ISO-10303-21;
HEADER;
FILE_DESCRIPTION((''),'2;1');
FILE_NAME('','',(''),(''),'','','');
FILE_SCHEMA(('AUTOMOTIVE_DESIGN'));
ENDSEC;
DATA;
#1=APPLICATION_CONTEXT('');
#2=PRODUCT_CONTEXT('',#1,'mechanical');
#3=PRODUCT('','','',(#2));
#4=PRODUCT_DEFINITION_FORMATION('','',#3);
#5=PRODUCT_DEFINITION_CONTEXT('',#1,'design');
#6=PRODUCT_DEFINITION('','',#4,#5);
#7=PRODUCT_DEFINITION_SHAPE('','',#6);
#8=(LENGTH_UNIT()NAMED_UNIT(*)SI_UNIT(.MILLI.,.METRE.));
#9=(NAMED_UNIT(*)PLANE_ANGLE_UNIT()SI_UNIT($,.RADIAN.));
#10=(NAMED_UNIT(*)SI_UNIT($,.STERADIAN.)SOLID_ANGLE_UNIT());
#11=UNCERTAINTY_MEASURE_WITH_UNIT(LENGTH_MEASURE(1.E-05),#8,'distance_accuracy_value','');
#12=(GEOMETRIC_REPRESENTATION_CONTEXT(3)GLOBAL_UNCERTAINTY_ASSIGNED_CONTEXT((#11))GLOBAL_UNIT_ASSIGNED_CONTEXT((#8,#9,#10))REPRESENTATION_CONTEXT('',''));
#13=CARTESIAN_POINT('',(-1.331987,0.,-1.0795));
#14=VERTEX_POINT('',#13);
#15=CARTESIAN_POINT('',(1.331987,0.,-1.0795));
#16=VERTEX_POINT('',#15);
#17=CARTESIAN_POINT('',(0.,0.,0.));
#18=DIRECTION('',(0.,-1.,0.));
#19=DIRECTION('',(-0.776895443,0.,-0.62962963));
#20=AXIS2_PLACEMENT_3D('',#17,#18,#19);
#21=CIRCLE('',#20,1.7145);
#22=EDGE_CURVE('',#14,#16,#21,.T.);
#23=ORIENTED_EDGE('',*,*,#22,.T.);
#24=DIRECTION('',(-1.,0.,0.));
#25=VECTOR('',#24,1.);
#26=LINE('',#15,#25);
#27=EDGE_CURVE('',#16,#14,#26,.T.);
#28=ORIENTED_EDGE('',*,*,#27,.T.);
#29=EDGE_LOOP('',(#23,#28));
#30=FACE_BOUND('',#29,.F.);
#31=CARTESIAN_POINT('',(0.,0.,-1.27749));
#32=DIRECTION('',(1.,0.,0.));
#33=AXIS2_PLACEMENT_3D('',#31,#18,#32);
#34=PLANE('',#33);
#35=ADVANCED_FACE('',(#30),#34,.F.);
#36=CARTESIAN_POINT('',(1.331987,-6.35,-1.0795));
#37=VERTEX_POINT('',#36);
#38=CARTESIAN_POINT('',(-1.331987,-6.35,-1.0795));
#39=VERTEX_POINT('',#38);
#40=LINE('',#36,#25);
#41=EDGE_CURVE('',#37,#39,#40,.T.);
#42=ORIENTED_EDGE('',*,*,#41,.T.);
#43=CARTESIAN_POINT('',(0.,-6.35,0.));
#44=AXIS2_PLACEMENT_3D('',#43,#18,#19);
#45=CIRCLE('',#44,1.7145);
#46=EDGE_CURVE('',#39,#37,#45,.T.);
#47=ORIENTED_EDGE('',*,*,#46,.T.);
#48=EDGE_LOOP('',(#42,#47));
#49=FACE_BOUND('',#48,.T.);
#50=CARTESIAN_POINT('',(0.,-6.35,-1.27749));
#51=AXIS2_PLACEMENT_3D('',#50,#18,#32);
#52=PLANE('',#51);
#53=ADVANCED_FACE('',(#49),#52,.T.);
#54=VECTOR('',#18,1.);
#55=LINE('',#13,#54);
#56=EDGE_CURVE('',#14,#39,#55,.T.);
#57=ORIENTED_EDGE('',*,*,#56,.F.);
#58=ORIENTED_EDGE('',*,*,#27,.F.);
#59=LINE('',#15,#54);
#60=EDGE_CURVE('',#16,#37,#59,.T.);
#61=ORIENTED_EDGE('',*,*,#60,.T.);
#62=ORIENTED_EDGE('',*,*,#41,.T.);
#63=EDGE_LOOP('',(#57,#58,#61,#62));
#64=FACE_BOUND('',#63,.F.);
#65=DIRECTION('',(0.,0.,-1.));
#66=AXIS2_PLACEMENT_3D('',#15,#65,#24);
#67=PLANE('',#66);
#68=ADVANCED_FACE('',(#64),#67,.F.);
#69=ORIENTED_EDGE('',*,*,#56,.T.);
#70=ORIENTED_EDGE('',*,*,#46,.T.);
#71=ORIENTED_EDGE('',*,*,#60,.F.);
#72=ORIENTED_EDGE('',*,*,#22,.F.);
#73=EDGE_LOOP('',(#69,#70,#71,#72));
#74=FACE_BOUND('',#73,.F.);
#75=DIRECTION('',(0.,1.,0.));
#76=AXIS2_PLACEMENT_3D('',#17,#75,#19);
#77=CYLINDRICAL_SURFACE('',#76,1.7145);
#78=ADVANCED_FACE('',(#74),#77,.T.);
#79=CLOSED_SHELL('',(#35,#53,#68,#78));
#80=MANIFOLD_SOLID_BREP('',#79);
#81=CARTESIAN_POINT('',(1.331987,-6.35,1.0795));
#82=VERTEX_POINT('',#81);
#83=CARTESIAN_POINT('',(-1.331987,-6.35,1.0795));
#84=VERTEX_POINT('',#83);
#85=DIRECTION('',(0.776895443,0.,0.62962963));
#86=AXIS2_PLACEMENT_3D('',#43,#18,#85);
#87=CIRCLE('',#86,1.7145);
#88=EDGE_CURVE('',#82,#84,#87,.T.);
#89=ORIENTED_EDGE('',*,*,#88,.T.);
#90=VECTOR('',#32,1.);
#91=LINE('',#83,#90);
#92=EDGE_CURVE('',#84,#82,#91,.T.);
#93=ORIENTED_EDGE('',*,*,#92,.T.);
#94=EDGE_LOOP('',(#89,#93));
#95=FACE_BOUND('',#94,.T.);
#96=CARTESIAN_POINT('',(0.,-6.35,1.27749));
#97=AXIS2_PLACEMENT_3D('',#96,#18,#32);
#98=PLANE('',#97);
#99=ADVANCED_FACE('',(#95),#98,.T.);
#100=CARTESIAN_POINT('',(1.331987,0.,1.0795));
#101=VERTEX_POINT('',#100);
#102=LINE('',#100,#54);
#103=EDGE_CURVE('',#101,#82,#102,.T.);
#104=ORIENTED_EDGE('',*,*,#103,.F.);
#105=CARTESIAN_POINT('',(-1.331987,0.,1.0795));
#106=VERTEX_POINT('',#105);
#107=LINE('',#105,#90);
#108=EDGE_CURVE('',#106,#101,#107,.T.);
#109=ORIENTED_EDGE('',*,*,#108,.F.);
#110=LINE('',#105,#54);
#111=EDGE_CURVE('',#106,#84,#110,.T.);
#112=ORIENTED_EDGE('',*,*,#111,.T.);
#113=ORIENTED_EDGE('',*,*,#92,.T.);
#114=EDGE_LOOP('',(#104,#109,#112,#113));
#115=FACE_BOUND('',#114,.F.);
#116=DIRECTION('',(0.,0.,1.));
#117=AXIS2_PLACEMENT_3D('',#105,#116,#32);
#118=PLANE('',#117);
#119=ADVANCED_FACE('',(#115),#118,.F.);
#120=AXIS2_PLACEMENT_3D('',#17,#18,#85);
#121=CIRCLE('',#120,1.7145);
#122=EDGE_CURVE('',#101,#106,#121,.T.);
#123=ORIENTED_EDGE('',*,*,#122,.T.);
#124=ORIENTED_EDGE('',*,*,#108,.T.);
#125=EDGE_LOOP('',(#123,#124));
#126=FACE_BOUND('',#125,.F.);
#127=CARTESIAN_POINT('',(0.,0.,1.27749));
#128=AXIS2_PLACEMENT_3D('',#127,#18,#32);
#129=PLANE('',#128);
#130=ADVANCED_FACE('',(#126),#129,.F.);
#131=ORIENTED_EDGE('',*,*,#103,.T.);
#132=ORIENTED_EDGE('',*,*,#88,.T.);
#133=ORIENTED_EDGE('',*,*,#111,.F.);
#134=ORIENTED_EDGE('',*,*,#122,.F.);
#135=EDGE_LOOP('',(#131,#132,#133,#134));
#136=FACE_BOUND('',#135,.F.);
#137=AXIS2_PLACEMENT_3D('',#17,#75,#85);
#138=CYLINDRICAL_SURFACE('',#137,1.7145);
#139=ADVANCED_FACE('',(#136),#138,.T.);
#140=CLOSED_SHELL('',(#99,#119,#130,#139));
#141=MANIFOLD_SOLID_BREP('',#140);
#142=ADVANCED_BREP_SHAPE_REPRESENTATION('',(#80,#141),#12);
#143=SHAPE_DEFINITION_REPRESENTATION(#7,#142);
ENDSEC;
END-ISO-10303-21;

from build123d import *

# Parameters (mm, degrees)
F1_DEPTH = 6.35


# Not quite as in the source:
# - a feature names something its author has since deleted; it is built from what else it names


with BuildPart() as f1:
    # F0 (on Front) → F1 (new body)
    with BuildSketch(Plane.XZ):
        with BuildLine():
            Line((-1.3319872372, 1.0795), (1.3319872372, 1.0795))
            ThreePointArc((1.3319872372, 1.0795), (0, 1.7145), (-1.3319872372, 1.0795))
        make_face()
    extrude(amount=F1_DEPTH)


with BuildPart() as f1b:
    # F0 (on Front) → F1, piece 2 (new body)
    with BuildSketch(Plane.XZ):
        with BuildLine():
            ThreePointArc((-1.3319872372, -1.0795), (0, -1.7145), (1.3319872372, -1.0795))
            Line((1.3319872372, -1.0795), (-1.3319872372, -1.0795))
        make_face()
    extrude(amount=F1_DEPTH)


solid = Compound([f1.part, f1b.part])
